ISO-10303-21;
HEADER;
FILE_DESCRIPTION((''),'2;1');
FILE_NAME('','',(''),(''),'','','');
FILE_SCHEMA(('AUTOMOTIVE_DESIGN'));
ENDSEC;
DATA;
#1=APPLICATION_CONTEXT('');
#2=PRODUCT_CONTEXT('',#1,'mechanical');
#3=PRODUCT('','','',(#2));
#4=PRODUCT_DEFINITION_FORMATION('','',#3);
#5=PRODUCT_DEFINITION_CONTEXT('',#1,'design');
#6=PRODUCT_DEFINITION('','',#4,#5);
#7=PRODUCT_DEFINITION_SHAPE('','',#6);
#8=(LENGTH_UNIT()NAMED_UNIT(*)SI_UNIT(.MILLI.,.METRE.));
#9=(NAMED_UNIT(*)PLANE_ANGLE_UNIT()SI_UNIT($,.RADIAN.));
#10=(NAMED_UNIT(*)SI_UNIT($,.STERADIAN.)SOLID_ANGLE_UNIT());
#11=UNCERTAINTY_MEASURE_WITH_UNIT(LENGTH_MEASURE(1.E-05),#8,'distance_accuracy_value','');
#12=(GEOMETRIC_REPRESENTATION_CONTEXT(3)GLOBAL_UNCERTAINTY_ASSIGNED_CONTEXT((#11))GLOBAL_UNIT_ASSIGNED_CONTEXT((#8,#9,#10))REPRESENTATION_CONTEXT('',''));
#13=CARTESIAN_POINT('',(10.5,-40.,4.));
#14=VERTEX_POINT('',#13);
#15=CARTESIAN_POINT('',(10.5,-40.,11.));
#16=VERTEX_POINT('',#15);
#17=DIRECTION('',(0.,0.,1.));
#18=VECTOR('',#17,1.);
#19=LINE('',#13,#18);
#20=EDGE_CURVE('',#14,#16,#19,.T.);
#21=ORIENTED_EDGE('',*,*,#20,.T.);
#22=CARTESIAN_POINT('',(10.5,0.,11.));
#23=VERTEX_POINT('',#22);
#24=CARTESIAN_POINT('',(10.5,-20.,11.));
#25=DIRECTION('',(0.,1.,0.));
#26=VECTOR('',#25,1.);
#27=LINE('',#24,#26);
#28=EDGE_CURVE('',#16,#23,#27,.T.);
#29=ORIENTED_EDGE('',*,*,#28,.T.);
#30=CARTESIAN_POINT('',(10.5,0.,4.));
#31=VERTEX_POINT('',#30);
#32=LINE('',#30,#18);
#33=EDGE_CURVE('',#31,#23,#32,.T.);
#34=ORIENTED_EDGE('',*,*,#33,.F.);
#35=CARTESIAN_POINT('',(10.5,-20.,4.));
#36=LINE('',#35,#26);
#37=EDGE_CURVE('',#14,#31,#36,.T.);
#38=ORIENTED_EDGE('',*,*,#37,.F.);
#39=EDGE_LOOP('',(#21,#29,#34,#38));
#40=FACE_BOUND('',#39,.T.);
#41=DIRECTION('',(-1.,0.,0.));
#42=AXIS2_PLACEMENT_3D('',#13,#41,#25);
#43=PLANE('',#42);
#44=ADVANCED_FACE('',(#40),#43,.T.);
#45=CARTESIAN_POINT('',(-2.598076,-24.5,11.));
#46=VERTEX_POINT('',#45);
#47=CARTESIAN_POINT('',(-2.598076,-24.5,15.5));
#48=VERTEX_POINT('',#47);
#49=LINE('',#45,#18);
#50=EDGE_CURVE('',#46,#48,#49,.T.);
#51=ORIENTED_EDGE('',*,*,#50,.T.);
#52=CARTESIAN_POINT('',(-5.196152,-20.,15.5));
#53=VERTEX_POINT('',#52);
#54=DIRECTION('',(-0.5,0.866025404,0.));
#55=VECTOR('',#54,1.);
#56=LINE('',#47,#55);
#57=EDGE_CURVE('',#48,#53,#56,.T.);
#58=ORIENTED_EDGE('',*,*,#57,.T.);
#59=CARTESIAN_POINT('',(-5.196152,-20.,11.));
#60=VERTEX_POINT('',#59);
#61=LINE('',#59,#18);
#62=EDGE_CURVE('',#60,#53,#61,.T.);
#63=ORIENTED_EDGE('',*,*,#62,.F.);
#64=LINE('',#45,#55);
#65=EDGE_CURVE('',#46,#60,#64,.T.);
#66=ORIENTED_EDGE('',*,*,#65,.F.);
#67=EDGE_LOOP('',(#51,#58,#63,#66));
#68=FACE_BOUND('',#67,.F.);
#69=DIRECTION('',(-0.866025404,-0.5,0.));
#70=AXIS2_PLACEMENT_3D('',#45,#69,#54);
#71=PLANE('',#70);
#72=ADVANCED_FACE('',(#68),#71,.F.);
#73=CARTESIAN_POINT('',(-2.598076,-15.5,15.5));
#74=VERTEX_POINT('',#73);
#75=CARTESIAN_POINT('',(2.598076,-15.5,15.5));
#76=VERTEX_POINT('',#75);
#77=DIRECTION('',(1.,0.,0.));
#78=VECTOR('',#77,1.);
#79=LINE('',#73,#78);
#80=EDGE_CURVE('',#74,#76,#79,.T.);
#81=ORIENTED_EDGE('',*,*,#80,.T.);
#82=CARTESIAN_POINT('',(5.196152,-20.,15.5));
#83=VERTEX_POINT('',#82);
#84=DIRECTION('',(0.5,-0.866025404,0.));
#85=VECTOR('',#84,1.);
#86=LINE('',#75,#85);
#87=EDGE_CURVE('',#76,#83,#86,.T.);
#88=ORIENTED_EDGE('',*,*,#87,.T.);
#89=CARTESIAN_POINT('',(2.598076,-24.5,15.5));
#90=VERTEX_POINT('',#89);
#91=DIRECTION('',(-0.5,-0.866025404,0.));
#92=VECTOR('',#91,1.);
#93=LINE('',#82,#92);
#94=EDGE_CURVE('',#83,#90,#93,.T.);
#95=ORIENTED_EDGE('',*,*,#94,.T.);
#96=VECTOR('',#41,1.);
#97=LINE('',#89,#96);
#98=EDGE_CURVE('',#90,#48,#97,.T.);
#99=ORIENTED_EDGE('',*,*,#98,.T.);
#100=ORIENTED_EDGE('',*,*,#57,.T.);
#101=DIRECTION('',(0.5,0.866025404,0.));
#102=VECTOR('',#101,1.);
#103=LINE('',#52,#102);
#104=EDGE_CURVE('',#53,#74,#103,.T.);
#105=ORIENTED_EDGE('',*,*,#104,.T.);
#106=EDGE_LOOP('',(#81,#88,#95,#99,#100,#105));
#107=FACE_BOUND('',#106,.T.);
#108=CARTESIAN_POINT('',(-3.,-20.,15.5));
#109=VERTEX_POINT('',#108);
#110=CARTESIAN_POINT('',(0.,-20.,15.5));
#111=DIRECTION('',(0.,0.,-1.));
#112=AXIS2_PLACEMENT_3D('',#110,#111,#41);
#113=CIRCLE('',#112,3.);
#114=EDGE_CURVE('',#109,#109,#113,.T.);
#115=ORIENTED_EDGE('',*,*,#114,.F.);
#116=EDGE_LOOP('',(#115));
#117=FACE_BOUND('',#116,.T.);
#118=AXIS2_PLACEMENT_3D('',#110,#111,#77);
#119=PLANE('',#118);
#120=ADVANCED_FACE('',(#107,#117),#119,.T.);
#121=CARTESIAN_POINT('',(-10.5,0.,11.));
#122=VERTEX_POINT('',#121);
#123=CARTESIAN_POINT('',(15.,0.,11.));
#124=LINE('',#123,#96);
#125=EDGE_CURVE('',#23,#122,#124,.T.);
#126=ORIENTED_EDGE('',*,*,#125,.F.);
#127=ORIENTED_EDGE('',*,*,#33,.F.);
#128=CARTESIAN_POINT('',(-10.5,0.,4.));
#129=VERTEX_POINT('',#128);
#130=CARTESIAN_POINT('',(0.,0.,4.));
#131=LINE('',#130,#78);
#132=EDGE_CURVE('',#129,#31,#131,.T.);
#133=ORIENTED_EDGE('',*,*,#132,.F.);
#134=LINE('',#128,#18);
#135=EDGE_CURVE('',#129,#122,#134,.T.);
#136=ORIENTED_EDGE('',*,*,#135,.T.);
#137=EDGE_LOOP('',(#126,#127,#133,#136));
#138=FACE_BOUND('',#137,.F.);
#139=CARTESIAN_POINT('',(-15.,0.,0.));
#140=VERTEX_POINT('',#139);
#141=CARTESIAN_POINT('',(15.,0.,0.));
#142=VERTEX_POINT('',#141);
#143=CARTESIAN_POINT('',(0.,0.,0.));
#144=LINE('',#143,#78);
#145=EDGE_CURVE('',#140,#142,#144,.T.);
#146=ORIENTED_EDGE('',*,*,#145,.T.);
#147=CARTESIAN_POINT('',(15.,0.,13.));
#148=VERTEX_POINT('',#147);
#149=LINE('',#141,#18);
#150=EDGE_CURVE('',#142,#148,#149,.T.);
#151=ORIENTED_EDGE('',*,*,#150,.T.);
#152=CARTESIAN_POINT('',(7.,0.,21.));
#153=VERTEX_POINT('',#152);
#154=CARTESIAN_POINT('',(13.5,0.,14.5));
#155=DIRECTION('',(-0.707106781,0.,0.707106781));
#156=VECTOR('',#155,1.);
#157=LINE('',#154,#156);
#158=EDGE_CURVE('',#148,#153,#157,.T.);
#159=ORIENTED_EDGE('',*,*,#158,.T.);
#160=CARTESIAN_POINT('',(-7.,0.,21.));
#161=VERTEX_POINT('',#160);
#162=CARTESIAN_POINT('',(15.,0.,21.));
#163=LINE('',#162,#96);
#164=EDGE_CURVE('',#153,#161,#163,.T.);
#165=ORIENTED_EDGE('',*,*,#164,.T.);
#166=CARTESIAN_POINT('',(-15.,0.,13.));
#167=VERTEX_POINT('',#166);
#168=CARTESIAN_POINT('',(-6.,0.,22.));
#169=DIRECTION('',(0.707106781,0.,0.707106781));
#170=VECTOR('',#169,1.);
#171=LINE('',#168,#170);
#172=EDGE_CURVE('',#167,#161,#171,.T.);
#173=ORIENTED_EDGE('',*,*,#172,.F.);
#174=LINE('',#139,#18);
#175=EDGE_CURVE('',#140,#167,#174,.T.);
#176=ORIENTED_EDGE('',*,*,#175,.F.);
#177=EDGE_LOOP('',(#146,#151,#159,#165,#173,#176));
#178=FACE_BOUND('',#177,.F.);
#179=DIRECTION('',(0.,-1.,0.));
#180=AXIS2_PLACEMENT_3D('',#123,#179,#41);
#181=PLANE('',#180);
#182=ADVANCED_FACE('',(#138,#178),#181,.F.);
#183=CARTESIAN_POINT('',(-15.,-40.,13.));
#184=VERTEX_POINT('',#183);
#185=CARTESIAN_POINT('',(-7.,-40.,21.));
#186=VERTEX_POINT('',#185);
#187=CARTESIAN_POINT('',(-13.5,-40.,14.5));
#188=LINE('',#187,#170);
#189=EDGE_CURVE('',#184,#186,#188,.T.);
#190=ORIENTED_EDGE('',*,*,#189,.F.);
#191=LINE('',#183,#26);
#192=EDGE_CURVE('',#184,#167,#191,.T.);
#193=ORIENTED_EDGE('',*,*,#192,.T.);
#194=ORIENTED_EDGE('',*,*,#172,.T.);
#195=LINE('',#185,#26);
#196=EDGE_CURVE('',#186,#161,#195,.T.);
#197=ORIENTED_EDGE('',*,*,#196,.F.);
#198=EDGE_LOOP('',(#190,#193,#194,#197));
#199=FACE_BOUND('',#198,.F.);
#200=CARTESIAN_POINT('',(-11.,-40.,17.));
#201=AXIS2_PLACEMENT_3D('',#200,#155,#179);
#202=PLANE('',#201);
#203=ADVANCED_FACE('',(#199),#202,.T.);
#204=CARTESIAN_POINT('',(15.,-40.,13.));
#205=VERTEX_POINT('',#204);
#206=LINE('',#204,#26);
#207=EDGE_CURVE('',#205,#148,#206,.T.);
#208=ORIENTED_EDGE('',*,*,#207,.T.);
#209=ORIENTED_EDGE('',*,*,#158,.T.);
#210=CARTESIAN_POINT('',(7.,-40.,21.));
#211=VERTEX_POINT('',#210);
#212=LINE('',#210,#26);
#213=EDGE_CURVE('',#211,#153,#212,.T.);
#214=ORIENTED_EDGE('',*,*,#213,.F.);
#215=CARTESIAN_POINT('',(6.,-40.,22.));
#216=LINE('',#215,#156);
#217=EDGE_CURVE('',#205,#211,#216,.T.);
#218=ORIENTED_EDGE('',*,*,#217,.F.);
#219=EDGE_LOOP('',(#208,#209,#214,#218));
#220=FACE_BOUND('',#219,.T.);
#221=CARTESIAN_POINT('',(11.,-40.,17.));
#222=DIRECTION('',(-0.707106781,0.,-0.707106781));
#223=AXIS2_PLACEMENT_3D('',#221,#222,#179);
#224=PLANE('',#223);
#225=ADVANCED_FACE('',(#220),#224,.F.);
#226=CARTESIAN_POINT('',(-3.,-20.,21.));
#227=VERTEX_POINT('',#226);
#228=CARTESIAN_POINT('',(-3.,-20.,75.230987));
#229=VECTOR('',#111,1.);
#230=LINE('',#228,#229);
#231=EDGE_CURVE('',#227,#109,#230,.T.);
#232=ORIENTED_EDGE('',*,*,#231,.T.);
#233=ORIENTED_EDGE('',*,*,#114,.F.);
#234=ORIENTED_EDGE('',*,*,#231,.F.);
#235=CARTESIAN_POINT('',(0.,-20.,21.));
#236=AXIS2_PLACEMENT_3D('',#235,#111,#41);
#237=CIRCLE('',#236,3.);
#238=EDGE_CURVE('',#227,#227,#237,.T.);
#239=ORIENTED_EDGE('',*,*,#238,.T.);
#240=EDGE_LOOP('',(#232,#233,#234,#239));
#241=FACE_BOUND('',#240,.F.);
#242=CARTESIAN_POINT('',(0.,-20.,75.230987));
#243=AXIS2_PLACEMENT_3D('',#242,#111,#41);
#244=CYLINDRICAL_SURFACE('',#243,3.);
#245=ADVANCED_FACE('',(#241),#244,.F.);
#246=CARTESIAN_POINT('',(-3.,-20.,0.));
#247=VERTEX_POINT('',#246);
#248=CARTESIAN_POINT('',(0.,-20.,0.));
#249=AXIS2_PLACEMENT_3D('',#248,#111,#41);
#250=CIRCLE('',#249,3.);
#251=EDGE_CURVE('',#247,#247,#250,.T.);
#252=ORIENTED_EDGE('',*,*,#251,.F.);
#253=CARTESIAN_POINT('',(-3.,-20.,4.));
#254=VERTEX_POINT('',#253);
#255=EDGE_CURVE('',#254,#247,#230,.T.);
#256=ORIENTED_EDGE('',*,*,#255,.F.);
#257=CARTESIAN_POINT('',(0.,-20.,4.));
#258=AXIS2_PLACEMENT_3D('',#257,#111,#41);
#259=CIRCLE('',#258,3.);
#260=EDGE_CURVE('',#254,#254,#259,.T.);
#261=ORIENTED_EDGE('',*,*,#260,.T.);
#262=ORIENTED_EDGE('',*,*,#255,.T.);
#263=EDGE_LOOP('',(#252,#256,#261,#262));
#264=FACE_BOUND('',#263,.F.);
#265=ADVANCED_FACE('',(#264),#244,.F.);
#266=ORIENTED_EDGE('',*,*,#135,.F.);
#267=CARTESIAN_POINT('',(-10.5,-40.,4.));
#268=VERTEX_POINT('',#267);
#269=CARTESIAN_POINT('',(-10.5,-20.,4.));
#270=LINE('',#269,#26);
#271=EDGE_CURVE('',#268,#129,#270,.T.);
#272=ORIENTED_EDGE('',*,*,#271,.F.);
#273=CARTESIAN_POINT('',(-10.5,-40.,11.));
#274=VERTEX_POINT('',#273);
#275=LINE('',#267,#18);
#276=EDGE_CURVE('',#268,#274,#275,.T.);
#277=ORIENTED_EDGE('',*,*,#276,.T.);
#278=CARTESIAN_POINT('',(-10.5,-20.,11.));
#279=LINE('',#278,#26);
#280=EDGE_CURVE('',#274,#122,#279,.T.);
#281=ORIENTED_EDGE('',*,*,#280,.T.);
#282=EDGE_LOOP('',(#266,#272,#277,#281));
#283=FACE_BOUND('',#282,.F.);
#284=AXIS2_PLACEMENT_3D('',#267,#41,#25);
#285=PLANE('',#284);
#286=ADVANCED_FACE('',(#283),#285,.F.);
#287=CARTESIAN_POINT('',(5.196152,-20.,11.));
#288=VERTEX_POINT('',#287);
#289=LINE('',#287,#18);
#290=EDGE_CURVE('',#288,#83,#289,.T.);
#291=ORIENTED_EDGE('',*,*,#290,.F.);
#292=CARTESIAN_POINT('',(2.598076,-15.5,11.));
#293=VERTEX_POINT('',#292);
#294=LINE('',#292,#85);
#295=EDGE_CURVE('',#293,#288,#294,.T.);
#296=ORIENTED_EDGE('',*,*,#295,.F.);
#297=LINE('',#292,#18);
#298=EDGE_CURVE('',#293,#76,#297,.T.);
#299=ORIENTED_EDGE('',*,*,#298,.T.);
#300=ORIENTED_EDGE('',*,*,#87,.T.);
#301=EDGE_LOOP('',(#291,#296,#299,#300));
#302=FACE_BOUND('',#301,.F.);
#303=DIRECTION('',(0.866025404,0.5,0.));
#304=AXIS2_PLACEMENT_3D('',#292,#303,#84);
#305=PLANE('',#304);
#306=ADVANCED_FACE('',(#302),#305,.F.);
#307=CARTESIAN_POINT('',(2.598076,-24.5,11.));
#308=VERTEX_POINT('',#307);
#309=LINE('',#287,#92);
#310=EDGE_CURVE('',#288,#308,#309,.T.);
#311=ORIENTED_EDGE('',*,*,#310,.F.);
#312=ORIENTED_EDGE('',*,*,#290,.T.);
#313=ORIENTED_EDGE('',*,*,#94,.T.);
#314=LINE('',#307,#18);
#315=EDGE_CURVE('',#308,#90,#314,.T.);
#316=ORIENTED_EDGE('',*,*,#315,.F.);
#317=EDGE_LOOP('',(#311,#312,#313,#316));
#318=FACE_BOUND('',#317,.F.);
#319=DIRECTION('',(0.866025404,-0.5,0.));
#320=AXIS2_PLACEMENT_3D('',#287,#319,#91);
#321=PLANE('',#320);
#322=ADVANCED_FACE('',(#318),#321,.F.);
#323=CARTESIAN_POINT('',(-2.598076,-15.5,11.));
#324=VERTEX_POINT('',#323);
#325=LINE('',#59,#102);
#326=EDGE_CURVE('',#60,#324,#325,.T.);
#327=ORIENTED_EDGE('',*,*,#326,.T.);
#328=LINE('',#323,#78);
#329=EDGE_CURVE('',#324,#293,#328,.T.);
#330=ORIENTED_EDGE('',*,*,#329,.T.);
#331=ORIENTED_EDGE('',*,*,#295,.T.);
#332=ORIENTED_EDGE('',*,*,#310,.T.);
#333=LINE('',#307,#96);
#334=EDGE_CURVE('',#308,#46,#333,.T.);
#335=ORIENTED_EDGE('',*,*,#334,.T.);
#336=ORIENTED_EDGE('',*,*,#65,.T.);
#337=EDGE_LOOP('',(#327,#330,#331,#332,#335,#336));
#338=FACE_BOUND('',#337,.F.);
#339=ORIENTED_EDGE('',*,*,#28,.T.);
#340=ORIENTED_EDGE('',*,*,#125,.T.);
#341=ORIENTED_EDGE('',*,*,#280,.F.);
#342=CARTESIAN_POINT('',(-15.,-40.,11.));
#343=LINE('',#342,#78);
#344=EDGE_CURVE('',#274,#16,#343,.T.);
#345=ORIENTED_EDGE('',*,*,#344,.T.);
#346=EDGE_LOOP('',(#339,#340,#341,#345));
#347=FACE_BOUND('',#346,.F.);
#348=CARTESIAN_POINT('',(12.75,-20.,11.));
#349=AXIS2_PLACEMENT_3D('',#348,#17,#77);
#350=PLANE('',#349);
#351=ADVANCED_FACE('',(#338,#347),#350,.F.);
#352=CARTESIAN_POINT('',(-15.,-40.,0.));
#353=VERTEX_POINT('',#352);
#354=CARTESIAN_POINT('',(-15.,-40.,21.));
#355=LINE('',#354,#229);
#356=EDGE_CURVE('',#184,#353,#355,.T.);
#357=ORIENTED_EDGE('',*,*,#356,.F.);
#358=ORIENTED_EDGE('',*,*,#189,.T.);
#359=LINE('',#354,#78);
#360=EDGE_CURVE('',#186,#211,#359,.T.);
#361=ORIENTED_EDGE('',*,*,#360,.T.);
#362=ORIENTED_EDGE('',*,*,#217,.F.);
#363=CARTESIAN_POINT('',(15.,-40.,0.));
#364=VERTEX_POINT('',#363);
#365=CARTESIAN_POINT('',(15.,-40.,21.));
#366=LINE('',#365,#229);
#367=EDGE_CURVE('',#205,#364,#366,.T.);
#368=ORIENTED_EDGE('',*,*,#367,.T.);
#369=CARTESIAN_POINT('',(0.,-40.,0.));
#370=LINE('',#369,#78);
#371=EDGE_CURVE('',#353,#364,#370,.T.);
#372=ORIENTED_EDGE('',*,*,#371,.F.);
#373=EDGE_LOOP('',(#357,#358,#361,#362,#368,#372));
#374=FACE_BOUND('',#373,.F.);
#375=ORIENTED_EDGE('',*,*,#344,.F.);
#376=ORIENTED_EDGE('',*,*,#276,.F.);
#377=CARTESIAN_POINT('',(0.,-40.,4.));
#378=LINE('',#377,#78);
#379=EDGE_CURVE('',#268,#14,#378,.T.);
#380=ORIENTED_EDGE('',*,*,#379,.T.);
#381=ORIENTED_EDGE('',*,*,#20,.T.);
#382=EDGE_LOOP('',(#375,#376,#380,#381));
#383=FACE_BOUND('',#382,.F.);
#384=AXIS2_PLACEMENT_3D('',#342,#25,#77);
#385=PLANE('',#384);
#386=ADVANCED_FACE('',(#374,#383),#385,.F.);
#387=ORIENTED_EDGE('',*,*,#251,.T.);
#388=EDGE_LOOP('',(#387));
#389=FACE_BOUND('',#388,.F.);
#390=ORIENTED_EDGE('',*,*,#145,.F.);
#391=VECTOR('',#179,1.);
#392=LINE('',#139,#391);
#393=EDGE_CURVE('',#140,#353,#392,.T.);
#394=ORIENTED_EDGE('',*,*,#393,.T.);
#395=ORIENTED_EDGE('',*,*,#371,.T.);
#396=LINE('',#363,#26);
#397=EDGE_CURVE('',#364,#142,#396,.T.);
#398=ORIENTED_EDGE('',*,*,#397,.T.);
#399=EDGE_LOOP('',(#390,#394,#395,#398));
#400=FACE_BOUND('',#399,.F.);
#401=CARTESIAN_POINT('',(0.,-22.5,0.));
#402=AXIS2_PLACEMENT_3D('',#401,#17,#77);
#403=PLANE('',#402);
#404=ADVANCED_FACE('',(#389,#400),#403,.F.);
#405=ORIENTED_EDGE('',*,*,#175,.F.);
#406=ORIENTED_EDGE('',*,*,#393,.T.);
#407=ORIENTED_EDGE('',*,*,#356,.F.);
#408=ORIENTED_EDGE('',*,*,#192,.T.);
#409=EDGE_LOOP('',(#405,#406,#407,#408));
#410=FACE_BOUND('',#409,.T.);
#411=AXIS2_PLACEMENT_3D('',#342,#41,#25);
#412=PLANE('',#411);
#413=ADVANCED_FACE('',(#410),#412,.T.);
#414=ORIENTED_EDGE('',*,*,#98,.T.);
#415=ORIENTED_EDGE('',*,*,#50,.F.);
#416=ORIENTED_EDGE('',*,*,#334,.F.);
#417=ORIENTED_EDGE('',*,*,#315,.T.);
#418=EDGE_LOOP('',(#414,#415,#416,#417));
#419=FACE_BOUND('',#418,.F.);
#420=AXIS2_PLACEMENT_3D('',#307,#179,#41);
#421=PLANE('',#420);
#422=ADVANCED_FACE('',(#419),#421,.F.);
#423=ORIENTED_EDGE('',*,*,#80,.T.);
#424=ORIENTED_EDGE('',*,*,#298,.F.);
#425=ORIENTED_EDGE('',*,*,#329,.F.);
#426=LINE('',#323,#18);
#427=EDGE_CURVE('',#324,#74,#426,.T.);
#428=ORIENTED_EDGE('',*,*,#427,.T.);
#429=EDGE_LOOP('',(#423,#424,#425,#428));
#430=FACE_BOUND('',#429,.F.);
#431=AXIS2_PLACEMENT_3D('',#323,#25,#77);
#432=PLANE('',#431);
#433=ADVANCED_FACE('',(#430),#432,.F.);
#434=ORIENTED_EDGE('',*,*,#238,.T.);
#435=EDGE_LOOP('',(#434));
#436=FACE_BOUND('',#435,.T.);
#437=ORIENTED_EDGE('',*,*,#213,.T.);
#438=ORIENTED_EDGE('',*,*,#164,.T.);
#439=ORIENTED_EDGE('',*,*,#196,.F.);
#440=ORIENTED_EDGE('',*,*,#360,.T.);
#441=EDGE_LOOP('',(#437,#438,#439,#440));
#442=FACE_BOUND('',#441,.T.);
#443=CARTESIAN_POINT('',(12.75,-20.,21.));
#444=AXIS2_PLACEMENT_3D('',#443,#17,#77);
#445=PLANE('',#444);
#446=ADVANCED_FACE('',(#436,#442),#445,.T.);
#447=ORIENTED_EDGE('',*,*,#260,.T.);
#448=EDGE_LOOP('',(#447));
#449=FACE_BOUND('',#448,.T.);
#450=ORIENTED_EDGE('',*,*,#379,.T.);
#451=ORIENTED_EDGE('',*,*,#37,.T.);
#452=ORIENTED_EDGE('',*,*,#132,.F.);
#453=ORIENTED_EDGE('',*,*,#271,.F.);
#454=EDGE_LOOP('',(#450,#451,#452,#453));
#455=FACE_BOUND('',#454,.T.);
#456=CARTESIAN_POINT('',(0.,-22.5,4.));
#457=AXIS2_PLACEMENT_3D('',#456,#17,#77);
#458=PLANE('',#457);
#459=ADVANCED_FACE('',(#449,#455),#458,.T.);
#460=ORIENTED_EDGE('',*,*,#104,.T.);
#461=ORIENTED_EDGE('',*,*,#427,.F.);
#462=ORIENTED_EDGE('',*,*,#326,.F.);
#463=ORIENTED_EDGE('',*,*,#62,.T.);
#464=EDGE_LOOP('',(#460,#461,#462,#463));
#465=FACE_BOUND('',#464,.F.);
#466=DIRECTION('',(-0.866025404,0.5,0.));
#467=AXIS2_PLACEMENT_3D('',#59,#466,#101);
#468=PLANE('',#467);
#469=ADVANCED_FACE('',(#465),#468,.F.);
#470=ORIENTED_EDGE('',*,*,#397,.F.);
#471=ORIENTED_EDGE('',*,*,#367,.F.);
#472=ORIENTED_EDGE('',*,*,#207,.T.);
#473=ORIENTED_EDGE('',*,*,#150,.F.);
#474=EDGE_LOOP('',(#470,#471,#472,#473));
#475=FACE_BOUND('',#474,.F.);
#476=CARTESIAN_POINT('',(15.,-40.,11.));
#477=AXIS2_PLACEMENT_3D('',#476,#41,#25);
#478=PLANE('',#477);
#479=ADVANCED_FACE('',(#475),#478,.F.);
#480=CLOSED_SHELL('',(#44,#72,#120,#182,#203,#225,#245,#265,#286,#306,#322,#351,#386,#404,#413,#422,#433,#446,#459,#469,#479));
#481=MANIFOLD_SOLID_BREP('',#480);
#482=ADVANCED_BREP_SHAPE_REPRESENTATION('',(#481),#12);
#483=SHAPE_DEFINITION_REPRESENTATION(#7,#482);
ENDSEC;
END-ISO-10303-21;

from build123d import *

# Parameters (mm, degrees)
F0_W     = 30
F0_H     = 35
F0_H_2   = 5
F1_DEPTH = 4
F2_W     = 4.5
F2_H     = 40
F3_DEPTH = 7
F4_W     = 4.5
F4_H     = 40
F4_W_2   = 25.5
F5_DEPTH = 10
F7_D     = 6
F8_R     = 3
F9_DEPTH = 4.5
F10_SIZE = 8


# Not quite as in the source:
# - a feature names something its author has since deleted; it is built from what else it names


with BuildPart() as f1:
    # F0 (on Top) → F1 (new body)
    with BuildSketch(Plane.XY):
        with Locations((0, -22.5)):
            Rectangle(F0_W, F0_H)
        with Locations((0, -2.5)):
            Rectangle(F0_W, F0_H_2)
    extrude(amount=F1_DEPTH)

    # F2 (on face) → F3 (join)
    with BuildSketch(Plane.XY.offset(4)):
        with Locations((12.75, -20)):
            Rectangle(F2_W, F2_H)
        with Locations((-12.75, -20)):
            Rectangle(F2_W, F2_H)
    extrude(amount=F3_DEPTH)

    # F4 (on face) → F5 (join)
    with BuildSketch(Plane.XY.offset(11)):
        with Locations((12.75, -20)):
            Rectangle(F4_W, F4_H)
        with Locations((-2.25, -20)):
            Rectangle(F4_W_2, F4_H)
    extrude(amount=F5_DEPTH)

    # F7 (through all)
    with Locations(Plane.XY.offset(21)):
        with Locations((0, -20)):
            Hole(F7_D / 2)

    # F8 (on face) → F9 (cut)
    with BuildSketch(Plane(origin=(0, 0, 11), x_dir=(1, 0, 0), z_dir=(0, 0, -1))):
        Polygon((2.5980762114, 24.5), (-2.5980762114, 24.5), (-5.1961524227, 20), (-2.5980762114, 15.5), (2.5980762114, 15.5), (5.1961524227, 20), align=None)
        with Locations((0, 20)):
            Circle(F8_R, mode=Mode.SUBTRACT)
    extrude(amount=-F9_DEPTH, mode=Mode.SUBTRACT)

    # F10
    f10_edges = [f1.edges().sort_by_distance(p)[0] for p in [
        (-15, -20, 21),
        (15, -20, 21),
    ]]
    chamfer(f10_edges, length=F10_SIZE)


solid = f1.part
